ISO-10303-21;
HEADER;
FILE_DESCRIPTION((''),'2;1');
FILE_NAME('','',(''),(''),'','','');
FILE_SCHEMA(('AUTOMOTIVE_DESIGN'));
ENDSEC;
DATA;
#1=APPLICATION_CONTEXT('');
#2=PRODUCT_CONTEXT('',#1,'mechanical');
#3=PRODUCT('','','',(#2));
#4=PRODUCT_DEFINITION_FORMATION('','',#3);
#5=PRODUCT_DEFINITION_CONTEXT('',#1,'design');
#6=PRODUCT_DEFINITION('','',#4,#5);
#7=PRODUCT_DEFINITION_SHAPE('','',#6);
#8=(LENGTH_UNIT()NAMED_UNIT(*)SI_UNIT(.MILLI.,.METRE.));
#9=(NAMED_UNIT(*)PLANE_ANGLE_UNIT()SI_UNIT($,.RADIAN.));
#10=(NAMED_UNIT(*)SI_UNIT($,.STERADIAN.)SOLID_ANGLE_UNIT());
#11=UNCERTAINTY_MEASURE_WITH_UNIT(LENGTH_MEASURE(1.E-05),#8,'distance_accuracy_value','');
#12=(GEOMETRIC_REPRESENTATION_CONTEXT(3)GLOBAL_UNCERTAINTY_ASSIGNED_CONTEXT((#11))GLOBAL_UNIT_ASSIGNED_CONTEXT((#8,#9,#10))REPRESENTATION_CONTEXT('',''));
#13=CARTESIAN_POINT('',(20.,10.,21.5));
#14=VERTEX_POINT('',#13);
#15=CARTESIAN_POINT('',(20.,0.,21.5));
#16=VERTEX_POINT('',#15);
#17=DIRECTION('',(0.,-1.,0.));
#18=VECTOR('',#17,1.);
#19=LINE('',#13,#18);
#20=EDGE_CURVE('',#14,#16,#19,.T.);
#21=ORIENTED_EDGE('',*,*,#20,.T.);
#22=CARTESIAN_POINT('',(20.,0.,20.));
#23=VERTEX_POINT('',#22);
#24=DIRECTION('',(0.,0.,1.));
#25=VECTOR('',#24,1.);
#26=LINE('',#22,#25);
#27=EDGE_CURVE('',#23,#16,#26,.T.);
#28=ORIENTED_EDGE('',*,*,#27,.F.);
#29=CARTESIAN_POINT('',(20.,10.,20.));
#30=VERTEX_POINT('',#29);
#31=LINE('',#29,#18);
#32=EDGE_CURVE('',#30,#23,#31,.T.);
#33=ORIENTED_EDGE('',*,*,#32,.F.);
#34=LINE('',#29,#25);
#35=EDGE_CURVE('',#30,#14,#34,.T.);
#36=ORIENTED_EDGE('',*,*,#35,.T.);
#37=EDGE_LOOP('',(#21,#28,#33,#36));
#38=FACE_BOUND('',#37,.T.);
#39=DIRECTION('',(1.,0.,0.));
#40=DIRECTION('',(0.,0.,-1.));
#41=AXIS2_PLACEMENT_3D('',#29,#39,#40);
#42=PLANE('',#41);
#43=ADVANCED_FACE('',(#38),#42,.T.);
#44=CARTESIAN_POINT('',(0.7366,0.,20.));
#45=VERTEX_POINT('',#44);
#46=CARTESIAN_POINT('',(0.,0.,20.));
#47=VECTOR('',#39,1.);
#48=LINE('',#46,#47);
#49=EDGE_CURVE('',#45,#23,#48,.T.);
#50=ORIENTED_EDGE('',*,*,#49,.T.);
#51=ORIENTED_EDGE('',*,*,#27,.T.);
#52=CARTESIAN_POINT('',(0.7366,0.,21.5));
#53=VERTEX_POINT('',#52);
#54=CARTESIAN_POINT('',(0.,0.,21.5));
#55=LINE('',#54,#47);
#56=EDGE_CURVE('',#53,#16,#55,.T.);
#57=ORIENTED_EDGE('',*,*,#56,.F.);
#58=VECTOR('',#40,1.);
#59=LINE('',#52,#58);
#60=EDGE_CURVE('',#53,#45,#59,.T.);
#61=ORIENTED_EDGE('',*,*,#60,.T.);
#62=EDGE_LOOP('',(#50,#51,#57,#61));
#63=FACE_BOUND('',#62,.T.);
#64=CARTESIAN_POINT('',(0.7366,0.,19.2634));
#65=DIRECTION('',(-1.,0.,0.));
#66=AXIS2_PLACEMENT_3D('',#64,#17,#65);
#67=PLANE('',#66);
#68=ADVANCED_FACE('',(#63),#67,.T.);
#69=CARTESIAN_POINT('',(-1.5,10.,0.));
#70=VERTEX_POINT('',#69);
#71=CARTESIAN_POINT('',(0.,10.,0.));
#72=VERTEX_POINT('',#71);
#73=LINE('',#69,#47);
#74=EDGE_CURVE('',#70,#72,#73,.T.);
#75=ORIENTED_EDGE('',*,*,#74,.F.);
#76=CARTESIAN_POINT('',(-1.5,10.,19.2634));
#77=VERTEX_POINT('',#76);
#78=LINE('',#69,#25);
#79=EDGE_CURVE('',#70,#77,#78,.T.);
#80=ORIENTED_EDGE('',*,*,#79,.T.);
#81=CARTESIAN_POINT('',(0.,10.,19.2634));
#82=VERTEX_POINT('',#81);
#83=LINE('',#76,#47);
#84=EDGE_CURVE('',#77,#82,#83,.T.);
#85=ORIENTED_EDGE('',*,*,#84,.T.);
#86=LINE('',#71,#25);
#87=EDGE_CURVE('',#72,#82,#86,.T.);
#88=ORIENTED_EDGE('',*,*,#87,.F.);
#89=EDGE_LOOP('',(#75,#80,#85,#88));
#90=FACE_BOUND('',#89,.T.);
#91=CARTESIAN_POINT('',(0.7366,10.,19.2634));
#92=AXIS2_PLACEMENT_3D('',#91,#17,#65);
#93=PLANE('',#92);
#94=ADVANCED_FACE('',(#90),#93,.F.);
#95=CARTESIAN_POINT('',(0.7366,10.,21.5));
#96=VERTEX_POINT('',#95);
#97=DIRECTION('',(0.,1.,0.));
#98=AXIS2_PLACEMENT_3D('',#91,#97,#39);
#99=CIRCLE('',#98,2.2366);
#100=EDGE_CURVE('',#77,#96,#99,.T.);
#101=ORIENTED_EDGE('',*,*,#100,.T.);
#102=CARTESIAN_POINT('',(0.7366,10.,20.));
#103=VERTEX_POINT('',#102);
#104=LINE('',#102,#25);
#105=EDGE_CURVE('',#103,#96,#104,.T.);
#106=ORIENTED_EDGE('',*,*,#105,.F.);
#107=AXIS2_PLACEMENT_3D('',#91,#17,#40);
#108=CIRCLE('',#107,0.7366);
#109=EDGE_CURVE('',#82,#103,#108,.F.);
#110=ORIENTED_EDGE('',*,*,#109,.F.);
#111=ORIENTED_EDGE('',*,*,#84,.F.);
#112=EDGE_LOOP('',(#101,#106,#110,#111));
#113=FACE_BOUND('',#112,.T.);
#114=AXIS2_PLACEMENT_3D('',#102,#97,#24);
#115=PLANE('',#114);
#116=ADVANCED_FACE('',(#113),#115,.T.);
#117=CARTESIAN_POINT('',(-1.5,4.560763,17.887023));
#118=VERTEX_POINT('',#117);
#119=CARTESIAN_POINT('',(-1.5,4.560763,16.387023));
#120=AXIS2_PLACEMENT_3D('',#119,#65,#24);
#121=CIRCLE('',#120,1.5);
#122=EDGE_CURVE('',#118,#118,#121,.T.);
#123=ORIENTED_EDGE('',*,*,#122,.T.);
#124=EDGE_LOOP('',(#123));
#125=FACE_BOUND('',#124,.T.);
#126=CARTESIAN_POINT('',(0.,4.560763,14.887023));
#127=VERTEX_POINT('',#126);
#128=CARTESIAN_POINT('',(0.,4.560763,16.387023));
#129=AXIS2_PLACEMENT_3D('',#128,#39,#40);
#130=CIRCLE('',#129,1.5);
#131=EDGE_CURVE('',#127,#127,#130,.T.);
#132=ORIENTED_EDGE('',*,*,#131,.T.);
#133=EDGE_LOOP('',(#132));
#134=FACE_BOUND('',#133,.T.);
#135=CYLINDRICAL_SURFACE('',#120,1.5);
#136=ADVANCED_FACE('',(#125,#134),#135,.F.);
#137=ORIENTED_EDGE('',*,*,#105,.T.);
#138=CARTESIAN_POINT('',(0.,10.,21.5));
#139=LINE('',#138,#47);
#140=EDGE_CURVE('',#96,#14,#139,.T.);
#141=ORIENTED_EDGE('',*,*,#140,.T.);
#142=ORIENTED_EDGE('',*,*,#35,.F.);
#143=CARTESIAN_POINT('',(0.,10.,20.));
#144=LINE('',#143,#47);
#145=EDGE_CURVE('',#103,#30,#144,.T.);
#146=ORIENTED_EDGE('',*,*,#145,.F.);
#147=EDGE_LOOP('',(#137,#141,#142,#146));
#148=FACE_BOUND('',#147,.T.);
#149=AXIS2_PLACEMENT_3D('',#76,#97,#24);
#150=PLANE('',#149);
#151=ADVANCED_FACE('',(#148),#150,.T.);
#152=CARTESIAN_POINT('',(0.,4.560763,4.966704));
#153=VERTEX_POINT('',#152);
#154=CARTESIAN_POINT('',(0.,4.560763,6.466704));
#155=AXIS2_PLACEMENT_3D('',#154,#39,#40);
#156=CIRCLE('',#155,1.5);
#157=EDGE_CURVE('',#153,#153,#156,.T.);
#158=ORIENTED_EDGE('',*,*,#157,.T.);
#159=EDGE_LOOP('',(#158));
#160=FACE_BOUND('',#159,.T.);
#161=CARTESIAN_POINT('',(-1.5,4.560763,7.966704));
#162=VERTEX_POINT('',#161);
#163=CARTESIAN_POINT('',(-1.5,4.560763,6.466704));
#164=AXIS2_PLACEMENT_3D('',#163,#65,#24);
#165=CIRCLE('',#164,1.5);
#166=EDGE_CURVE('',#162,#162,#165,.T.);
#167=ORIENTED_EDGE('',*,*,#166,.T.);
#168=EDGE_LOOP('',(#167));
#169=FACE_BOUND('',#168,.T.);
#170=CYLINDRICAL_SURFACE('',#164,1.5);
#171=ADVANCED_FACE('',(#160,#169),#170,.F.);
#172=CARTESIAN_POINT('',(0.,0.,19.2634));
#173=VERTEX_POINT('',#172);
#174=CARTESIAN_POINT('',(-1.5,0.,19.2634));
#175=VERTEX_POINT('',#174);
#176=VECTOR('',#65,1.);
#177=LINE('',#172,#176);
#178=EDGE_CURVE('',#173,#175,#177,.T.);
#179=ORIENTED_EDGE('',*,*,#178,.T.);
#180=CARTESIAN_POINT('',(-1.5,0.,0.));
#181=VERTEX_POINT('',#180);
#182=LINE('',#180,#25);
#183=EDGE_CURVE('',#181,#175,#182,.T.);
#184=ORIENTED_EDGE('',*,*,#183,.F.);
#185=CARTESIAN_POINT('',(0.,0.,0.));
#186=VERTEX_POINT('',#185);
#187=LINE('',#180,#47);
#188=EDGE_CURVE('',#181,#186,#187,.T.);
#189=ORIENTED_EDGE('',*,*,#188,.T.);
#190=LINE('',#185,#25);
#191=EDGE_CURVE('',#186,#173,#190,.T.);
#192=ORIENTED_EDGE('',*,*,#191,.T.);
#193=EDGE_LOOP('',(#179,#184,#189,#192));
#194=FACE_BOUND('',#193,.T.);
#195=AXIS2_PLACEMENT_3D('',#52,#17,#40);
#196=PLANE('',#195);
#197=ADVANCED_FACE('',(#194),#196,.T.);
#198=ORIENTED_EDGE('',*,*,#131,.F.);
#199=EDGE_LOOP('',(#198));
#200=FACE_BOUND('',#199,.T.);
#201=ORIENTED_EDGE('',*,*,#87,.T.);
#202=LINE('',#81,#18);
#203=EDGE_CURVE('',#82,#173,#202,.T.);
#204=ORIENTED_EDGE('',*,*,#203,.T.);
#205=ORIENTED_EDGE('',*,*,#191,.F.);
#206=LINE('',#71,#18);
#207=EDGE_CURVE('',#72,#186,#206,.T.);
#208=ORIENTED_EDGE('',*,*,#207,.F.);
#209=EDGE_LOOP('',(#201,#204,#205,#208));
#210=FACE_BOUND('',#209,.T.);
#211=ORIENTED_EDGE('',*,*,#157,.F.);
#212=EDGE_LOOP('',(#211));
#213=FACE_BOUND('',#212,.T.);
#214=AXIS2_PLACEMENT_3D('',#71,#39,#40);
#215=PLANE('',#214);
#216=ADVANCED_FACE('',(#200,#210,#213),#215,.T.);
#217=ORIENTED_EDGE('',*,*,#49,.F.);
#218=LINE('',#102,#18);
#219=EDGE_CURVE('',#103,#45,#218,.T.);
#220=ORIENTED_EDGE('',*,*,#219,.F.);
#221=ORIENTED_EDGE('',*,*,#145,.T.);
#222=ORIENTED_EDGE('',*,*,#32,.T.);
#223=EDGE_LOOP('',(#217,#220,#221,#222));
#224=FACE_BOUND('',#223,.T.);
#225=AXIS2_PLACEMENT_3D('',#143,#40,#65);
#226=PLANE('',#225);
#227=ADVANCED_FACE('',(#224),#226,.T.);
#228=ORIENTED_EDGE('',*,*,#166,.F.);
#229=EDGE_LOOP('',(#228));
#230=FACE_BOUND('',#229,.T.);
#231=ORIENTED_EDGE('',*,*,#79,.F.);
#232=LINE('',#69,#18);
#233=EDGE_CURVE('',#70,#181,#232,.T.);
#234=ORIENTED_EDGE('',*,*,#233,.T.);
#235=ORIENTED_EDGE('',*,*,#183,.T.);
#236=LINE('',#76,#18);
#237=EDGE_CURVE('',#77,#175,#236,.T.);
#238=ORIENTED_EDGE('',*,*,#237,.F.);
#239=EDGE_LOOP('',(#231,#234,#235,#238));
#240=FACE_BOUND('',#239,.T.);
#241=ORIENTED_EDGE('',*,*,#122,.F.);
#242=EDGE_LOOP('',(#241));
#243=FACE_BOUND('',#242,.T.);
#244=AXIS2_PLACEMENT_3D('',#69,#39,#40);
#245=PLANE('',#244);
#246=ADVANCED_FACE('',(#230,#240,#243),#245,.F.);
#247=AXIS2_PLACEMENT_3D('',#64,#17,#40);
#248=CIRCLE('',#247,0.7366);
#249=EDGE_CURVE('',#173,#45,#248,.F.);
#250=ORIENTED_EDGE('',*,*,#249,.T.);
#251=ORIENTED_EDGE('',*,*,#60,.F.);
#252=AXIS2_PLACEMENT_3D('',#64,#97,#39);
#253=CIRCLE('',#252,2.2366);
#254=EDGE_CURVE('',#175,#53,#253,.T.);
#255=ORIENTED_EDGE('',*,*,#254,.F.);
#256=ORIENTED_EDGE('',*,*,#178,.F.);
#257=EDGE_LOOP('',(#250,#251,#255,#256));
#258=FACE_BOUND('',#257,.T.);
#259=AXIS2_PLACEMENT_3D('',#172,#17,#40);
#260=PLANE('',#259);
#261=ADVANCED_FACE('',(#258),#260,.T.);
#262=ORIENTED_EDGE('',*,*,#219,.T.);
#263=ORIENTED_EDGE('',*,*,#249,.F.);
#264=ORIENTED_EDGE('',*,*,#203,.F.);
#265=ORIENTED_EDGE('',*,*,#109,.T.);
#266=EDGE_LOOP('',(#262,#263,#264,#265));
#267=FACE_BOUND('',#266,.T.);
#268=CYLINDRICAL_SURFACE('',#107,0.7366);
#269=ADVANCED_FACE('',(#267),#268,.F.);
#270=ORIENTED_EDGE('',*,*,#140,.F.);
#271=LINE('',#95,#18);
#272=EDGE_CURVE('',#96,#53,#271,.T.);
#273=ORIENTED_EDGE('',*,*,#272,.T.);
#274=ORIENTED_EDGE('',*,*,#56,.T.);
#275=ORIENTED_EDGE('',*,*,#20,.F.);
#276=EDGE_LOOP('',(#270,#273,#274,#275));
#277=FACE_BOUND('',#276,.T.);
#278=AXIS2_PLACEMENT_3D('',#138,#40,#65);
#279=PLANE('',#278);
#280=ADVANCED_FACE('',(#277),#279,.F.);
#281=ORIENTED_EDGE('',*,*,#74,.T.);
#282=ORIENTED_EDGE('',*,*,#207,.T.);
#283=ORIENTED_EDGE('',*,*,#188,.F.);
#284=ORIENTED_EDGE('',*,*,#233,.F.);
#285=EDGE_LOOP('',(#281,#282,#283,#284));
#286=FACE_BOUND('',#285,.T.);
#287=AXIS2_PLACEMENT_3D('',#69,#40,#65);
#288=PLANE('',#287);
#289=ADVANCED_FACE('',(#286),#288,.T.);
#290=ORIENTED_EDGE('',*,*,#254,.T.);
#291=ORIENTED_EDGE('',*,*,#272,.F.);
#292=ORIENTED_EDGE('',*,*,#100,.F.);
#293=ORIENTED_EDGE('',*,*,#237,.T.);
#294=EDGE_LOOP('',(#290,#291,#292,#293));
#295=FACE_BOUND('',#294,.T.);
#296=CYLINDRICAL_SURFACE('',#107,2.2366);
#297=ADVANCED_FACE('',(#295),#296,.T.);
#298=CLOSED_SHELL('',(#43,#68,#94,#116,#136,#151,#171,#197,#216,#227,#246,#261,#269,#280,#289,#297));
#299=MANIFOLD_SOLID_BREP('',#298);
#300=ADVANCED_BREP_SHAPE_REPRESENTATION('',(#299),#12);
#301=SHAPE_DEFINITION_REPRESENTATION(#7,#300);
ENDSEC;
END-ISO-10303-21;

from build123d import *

# Parameters (mm, degrees)
BASE_FLANGE1_DEPTH                 = 10
F_3_0MM_TRANSITIONAL_DOWEL_HOLE1_D = 3


# Sheet-metal steps are written as plain solids
with BuildPart() as part:
    # Sketch1 → Base-Flange1 (new body)
    with BuildSketch(Plane(origin=(0, 0, 0), x_dir=(1, 0, 0), z_dir=(0, 1, 0))):
        with BuildLine():
            Line((0, 0), (0, -19.2634))
            ThreePointArc((0, -19.2634), (0.215745145, -19.784254855), (0.7366, -20))
            Line((0.7366, -20), (20, -20))
            Line((20, -20), (20, -21.5))
            Line((20, -21.5), (0.7366, -21.5))
            ThreePointArc((0.7366, -21.5), (-0.844915027, -20.844915027), (-1.5, -19.2634))
            Line((-1.5, -19.2634), (-1.5, 0))
            Line((-1.5, 0), (0, 0))
        make_face()
    extrude(amount=BASE_FLANGE1_DEPTH)

    # Ø3.0mm Transitional Dowel Hole1 (through all)
    with Locations(Plane.ZY.offset(1.5)):
        with Locations((16.387023366, 4.560762846), (6.466703516, 4.560762846)):
            Hole(F_3_0MM_TRANSITIONAL_DOWEL_HOLE1_D / 2)


solid = part.part
